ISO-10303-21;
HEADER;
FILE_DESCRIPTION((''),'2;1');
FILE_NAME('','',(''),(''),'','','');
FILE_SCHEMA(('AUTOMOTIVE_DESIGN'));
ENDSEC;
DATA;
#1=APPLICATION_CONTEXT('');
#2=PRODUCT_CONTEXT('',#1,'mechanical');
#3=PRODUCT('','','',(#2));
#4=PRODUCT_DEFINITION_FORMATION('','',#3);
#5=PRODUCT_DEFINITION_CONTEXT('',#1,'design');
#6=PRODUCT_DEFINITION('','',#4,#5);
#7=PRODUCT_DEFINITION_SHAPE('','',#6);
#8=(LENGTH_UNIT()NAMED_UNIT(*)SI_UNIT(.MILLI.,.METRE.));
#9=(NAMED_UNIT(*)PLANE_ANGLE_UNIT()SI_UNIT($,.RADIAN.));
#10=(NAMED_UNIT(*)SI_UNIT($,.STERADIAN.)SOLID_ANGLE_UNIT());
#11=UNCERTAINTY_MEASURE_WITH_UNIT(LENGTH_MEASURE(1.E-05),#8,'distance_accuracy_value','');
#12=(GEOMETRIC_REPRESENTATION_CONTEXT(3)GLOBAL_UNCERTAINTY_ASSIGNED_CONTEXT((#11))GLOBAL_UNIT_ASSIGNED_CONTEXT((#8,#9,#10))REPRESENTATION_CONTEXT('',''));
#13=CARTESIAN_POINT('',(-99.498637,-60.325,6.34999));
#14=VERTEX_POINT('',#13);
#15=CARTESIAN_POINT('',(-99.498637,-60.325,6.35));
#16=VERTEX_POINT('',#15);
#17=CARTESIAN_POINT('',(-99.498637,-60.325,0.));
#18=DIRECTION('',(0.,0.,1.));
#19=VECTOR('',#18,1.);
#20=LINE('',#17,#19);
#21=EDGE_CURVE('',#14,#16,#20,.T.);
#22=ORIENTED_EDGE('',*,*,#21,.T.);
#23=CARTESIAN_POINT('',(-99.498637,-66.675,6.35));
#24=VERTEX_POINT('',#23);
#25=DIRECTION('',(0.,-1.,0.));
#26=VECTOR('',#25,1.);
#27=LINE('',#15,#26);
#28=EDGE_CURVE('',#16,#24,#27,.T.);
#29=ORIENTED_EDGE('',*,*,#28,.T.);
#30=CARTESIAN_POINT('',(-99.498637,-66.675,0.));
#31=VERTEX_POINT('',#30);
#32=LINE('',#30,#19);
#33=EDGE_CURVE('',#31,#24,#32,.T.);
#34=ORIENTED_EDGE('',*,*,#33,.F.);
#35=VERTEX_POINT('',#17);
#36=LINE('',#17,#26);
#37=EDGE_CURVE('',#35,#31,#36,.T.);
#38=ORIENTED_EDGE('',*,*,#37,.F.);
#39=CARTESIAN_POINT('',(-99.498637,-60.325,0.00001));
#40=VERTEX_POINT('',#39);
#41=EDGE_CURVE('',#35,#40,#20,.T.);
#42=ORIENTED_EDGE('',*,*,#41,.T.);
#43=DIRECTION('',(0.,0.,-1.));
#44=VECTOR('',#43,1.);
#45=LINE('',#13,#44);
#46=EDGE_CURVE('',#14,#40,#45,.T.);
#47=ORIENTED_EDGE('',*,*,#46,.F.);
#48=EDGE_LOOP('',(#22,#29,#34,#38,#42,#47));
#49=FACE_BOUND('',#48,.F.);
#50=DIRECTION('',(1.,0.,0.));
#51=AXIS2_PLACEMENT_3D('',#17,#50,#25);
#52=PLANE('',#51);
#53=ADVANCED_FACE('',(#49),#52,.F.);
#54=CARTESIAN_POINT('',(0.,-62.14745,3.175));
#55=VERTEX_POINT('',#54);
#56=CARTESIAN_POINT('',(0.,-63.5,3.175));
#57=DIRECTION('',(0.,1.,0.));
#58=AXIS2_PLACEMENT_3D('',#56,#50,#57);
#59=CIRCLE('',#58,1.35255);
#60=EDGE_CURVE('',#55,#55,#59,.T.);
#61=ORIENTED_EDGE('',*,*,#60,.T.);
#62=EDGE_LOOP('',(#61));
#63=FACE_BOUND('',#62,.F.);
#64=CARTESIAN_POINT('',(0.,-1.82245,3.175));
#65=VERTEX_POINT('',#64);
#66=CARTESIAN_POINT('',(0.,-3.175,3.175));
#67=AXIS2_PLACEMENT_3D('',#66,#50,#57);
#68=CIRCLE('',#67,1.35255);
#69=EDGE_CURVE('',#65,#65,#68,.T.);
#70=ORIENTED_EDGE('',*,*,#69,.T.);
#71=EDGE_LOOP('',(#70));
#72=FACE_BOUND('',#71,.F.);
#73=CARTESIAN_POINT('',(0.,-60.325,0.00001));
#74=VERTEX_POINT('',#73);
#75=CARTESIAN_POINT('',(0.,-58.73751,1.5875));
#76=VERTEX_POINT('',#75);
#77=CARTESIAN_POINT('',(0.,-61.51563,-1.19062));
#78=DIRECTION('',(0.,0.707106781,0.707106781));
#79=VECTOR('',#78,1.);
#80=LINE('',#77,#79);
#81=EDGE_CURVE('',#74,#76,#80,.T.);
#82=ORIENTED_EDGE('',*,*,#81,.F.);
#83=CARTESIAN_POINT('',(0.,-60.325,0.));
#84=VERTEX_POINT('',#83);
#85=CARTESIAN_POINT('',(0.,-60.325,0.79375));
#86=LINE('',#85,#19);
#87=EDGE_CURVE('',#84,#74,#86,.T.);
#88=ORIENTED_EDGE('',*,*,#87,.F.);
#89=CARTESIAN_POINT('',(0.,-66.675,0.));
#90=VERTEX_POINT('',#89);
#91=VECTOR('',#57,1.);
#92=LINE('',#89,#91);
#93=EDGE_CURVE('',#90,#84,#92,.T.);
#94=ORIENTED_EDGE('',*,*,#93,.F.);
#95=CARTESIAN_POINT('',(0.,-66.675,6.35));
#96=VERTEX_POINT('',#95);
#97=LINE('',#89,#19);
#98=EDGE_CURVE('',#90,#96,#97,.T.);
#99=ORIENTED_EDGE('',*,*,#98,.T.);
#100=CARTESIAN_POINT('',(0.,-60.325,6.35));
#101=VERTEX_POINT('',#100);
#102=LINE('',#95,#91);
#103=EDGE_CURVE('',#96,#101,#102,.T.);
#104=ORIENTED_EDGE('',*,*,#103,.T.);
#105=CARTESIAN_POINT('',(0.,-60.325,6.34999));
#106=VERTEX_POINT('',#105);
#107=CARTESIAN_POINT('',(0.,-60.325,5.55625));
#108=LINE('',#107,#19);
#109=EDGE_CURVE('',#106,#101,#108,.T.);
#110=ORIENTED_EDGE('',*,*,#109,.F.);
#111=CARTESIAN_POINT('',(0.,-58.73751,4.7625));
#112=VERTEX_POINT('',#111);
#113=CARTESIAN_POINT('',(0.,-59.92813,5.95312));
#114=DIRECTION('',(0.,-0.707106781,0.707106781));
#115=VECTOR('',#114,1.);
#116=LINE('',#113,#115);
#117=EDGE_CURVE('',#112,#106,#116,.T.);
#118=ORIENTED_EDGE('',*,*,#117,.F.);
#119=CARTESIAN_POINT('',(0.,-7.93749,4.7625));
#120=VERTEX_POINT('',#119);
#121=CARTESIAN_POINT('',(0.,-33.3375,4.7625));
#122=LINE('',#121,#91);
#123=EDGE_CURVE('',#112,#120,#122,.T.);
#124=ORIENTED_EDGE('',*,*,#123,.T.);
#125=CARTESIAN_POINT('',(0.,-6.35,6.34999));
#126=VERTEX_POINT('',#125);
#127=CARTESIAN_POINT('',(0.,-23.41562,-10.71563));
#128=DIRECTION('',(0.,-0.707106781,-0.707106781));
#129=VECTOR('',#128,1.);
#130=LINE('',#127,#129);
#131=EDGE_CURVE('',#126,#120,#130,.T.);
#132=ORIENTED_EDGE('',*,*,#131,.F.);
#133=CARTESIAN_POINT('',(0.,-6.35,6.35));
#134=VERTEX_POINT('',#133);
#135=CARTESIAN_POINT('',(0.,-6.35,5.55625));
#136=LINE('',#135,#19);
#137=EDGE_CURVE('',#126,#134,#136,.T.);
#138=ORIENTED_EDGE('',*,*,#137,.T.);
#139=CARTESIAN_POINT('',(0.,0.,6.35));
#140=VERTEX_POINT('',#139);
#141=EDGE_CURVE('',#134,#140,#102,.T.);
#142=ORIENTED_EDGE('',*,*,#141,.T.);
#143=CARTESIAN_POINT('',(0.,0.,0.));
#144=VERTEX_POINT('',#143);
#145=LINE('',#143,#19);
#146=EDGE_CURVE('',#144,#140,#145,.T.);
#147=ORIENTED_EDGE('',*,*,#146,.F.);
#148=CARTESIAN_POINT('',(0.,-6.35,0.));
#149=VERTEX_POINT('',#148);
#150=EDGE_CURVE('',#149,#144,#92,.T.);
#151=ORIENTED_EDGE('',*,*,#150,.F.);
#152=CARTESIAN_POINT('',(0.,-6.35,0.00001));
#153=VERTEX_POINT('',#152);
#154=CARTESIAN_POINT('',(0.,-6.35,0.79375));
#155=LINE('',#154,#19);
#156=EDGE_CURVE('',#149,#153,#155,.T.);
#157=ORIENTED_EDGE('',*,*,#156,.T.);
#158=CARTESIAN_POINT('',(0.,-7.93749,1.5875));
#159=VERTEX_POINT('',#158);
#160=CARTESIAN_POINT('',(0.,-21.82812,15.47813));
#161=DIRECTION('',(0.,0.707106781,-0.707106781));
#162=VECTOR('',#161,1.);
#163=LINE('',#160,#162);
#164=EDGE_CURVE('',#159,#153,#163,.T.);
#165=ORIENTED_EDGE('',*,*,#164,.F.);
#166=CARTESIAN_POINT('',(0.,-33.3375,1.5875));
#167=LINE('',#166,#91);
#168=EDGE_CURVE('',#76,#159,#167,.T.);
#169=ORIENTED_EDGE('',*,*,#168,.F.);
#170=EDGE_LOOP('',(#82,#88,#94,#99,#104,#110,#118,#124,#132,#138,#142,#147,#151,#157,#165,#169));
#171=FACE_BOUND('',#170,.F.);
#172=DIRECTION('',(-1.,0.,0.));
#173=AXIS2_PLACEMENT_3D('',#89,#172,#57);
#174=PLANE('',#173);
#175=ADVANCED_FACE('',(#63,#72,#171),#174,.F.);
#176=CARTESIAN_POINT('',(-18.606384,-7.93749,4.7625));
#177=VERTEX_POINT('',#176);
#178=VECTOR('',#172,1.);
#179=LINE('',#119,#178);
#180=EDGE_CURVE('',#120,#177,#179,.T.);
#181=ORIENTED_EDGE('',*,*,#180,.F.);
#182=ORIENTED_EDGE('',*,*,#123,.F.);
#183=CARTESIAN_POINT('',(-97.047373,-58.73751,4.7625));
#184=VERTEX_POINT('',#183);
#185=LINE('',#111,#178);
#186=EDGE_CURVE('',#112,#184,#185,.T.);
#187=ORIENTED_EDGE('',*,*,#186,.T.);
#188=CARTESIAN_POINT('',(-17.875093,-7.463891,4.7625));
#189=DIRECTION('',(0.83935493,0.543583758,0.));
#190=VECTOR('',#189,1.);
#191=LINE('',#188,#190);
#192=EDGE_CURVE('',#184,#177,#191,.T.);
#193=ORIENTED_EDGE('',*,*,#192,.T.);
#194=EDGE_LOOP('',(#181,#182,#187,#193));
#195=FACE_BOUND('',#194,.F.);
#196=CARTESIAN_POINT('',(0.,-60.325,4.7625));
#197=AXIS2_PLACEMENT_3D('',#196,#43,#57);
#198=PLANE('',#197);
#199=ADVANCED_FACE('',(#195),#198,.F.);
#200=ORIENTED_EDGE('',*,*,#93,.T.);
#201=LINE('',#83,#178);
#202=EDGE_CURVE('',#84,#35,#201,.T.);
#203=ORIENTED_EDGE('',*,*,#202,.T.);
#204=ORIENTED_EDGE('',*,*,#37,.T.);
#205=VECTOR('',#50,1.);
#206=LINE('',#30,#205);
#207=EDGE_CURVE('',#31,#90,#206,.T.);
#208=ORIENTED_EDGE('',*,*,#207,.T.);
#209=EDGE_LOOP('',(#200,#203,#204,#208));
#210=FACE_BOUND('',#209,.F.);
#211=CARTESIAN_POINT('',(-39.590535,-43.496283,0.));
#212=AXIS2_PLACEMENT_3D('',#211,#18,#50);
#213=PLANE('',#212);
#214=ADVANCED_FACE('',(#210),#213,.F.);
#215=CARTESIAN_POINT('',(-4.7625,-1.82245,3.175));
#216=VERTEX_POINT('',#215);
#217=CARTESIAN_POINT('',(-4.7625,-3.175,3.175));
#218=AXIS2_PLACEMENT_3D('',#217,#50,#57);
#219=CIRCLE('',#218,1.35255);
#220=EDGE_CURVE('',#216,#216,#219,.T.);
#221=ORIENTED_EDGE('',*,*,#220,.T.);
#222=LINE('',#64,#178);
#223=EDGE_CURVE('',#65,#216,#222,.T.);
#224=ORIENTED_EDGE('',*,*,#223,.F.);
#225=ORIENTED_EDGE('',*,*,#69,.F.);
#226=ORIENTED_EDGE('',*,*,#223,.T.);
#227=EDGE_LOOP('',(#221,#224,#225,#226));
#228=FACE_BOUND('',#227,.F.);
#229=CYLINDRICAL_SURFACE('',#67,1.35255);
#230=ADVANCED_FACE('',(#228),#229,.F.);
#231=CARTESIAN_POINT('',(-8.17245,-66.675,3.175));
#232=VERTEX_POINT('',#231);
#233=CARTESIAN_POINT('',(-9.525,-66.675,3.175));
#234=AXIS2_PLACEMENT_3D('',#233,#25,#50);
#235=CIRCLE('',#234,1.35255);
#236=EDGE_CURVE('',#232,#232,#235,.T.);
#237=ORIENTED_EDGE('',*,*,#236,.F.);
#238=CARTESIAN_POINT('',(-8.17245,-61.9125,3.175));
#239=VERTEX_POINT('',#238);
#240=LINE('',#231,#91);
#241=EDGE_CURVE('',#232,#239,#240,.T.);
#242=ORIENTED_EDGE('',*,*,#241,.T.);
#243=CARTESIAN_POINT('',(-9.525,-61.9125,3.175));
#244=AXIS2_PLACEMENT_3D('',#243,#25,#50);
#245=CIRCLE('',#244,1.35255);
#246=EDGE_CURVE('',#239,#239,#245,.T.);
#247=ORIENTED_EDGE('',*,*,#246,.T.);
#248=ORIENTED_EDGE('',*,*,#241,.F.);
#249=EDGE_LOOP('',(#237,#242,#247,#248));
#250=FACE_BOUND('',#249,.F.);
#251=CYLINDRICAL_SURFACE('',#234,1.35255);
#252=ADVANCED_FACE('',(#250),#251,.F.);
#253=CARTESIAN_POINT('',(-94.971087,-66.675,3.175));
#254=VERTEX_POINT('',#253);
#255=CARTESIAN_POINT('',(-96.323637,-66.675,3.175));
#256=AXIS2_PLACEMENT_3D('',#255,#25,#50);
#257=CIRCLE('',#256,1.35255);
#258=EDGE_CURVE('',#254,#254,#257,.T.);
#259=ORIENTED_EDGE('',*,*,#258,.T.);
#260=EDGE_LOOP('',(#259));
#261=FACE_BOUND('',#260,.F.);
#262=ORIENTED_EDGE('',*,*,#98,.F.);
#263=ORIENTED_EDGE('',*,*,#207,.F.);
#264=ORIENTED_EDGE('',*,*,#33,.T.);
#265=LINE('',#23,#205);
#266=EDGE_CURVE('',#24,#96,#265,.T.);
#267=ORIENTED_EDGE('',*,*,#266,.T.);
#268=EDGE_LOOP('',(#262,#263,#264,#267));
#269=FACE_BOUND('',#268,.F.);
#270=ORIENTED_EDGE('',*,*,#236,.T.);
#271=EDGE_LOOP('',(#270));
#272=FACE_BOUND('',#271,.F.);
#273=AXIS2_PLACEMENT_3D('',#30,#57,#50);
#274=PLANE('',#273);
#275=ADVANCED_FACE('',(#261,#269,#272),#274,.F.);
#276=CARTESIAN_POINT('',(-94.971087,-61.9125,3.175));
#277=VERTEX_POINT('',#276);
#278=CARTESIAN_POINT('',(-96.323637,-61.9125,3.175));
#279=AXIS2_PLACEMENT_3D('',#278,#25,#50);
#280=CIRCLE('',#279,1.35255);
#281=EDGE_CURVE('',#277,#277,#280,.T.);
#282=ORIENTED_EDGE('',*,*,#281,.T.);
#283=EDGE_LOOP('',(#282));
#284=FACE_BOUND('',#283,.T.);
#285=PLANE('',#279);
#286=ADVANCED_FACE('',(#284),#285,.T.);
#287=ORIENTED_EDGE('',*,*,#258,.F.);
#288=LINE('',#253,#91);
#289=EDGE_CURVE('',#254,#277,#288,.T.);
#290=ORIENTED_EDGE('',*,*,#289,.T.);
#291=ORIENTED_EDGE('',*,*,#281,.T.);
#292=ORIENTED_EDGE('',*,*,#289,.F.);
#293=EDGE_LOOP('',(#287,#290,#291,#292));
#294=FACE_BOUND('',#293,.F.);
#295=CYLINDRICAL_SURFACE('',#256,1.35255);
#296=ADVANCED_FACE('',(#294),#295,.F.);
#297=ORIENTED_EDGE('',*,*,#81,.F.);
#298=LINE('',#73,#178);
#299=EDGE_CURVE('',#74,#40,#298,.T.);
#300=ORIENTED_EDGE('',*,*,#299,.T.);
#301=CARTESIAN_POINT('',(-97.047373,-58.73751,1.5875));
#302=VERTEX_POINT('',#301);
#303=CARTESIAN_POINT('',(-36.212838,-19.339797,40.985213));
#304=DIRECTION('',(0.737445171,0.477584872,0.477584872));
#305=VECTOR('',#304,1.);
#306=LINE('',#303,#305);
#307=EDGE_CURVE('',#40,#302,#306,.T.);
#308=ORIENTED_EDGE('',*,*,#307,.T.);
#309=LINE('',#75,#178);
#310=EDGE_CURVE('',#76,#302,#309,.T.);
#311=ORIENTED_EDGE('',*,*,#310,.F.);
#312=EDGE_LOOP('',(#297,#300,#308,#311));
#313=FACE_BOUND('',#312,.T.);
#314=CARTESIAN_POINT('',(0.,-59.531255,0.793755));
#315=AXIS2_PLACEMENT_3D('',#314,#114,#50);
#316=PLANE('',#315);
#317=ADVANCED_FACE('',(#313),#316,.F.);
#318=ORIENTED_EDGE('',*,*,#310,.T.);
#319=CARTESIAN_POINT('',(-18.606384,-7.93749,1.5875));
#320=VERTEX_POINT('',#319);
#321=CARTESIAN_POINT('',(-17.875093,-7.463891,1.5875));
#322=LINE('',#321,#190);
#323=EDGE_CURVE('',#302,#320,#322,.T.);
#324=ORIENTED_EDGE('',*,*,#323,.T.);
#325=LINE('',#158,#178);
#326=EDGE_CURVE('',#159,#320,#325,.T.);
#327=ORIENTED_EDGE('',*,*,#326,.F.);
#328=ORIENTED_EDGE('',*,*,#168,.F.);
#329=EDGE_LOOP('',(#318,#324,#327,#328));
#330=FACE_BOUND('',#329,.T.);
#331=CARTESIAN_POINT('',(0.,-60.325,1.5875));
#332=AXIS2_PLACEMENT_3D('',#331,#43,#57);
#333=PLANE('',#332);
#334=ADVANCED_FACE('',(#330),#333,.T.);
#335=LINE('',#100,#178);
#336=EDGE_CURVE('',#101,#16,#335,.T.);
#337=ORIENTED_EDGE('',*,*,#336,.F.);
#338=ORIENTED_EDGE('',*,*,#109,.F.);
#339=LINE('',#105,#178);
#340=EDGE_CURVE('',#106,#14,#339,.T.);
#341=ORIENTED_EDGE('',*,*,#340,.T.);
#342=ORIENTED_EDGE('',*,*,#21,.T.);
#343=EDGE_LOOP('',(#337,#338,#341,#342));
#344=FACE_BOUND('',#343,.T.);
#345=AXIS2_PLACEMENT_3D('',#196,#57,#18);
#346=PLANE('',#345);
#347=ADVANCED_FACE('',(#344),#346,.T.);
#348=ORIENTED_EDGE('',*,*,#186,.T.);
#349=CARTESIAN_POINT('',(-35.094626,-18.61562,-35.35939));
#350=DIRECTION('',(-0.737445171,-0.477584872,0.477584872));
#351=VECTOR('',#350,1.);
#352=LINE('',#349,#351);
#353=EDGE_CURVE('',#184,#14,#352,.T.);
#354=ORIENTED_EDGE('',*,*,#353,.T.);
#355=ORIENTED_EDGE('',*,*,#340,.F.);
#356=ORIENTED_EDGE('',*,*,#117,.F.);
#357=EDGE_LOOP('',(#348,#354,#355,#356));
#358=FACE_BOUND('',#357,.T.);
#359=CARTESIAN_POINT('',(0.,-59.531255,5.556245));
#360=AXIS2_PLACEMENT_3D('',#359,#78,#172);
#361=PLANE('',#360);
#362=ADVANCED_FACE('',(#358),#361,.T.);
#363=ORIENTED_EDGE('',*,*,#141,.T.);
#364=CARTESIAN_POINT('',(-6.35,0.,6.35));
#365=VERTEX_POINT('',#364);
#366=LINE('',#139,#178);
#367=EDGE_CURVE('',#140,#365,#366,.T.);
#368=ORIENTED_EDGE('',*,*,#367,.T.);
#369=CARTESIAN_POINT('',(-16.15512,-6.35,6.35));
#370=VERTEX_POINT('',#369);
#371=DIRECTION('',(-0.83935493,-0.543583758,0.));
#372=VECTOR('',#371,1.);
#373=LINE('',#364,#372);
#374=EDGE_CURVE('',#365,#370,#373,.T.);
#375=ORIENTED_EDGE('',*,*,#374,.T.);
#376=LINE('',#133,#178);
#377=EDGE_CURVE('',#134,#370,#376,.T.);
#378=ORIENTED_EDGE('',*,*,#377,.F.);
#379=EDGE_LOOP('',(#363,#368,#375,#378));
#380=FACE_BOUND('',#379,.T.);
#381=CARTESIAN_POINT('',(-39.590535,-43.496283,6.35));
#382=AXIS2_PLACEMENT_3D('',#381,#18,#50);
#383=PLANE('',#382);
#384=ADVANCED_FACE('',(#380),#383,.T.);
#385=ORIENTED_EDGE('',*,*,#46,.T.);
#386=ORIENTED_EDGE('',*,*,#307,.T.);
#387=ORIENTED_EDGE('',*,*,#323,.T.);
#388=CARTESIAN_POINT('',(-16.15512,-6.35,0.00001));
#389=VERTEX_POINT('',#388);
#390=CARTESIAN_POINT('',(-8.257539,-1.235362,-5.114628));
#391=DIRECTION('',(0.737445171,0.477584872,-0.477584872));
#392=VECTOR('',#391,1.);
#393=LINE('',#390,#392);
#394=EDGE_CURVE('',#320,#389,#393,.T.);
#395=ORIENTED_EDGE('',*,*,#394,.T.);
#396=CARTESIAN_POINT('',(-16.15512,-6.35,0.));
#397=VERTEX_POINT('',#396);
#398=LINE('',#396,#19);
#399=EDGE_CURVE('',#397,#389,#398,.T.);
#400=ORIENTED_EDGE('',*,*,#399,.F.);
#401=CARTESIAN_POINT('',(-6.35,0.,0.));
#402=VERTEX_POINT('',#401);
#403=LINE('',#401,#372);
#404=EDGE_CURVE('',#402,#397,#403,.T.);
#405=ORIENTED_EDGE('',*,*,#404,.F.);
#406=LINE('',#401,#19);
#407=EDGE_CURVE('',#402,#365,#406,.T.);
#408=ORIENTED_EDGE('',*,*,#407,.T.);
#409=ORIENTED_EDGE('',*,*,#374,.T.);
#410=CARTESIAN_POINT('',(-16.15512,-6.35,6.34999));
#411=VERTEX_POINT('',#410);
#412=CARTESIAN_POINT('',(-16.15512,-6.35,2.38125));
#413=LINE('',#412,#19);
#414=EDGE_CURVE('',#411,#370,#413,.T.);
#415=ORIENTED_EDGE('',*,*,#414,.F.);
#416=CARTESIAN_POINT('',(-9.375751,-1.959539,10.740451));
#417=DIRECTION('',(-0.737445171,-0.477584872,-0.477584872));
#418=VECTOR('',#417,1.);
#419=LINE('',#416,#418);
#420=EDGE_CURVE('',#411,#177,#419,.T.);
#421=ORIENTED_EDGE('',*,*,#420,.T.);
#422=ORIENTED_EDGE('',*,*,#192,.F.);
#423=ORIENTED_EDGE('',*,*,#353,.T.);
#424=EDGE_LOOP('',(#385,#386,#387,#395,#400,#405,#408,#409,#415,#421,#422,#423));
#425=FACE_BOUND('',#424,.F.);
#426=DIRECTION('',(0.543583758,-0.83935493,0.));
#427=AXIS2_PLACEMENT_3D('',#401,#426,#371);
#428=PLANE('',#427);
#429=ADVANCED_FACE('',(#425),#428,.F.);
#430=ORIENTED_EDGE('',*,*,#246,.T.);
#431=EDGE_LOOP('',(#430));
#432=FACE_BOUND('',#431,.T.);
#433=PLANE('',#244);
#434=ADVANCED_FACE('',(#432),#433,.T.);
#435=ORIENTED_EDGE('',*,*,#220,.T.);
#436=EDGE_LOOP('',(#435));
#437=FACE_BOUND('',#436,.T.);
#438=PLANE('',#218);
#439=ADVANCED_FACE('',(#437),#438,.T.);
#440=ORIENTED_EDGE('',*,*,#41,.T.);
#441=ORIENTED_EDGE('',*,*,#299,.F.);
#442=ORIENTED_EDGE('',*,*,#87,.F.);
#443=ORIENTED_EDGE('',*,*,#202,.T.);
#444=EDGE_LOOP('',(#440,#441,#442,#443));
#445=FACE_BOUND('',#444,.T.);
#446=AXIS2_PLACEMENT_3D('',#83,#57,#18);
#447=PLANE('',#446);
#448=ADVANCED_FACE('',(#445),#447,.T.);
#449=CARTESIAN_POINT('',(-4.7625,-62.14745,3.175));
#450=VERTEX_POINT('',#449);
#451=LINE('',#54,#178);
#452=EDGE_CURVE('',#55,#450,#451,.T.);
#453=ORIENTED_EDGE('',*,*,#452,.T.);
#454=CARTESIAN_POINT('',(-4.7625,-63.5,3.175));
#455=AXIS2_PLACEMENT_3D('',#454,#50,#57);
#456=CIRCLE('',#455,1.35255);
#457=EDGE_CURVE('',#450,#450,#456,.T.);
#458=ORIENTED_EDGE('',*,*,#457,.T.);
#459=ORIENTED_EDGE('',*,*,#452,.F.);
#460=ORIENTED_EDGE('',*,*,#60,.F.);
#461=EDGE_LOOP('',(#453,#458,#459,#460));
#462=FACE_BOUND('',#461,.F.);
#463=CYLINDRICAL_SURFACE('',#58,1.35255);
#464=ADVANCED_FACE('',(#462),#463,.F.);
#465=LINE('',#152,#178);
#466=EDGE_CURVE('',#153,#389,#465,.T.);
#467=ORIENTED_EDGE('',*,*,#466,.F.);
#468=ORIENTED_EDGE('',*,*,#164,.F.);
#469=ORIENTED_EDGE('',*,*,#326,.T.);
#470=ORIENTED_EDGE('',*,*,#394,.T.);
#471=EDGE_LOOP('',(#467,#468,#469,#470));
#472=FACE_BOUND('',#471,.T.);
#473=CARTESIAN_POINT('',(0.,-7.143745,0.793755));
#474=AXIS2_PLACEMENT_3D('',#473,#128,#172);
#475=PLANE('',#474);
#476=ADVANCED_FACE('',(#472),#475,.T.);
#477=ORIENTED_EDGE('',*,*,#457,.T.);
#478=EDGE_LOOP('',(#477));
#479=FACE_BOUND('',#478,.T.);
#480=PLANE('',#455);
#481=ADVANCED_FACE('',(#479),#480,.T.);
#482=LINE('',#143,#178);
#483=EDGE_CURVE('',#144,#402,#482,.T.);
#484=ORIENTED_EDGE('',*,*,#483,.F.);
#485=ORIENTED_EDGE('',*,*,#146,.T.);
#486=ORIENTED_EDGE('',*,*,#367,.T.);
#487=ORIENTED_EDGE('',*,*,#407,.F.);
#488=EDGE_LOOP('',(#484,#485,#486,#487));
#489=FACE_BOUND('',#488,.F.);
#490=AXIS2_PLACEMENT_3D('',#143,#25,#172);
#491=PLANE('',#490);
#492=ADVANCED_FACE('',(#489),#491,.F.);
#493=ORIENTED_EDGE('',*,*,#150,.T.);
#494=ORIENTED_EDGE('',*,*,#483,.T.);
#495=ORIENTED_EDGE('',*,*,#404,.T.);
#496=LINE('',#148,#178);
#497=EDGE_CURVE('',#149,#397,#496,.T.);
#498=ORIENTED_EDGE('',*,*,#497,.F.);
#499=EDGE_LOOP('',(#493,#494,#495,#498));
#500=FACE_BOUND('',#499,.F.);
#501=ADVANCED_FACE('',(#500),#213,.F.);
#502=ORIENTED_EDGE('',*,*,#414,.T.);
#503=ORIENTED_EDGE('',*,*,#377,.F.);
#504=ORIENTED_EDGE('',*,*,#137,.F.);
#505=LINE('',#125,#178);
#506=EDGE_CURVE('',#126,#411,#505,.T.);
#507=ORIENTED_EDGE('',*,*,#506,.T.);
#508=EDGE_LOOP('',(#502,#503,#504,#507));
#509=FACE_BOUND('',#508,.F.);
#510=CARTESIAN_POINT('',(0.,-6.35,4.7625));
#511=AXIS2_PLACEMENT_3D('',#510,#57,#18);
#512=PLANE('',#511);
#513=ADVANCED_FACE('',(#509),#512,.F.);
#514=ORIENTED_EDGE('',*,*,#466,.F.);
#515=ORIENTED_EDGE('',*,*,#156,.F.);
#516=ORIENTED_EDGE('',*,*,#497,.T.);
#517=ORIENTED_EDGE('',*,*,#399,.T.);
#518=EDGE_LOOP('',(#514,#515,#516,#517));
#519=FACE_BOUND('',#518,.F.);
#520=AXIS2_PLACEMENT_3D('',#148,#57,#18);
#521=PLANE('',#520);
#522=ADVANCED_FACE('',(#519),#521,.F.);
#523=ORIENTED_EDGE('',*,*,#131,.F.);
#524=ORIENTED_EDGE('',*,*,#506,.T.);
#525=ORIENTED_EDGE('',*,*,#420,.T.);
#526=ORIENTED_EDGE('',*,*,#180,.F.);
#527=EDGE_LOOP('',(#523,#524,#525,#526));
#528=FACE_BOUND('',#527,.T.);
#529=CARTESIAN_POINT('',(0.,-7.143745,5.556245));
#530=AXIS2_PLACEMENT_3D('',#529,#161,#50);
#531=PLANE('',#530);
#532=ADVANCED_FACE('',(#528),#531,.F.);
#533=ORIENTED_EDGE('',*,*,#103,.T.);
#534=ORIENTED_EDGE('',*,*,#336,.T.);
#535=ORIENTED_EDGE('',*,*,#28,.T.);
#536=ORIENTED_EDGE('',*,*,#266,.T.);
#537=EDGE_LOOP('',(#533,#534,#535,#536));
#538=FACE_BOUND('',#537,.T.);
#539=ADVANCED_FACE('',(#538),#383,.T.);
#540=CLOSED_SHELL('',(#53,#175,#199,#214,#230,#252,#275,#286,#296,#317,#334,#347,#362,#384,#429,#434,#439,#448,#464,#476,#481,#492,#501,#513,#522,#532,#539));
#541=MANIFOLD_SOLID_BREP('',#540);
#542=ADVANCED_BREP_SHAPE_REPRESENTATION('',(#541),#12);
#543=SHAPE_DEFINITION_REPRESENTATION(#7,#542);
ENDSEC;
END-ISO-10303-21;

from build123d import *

# Parameters (mm, degrees)
F1_DEPTH = 6.35
F2_R     = 1.35255
F3_DEPTH = 4.7625
F4_R     = 1.35255
F5_DEPTH = 4.7625
F6_W     = 53.975
F6_H     = 1.5875
F7_DEPTH = 99.4996370206
F8_SIZE  = 1.58749


# Not quite as in the source:
# - a fillet or chamfer is up to 0.001 mm smaller than in the source, because OpenCascade refuses the exact size


with BuildPart() as f1:
    # F0 (on Top) → F1 (new body)
    with BuildSketch(Plane.XY):
        Polygon((0, -66.675), (0, 0), (-6.35, 0), (-99.4986370206, -60.325), (-99.4986370206, -66.675), align=None)
    extrude(amount=F1_DEPTH)

    # F2 (on face) → F3 (cut)
    with BuildSketch(Plane.YZ):
        with Locations((-63.5, 3.175)):
            Circle(F2_R)
        with Locations((-3.175, 3.175)):
            Circle(F2_R)
    extrude(amount=-F3_DEPTH, mode=Mode.SUBTRACT)

    # F4 (on face) → F5 (cut)
    with BuildSketch(Plane.XZ.offset(66.675)):
        with Locations((-96.3236370206, 3.175)):
            Circle(F4_R)
        with Locations((-9.525, 3.175)):
            Circle(F4_R)
    extrude(amount=-F5_DEPTH, mode=Mode.SUBTRACT)

    # F6 (on face) → F7 (cut, through all)
    with BuildSketch(Plane.YZ):
        with Locations((-33.3375, 5.55625)):
            Rectangle(F6_W, F6_H)
        with Locations((-33.3375, 0.79375)):
            Rectangle(F6_W, F6_H)
    extrude(amount=-F7_DEPTH, mode=Mode.SUBTRACT)

    # F8 (size 1.5875 in the source; OpenCascade refuses exactly that, so slightly less here)
    f8_edges = [f1.edges().sort_by_distance(p)[0] for p in [
        (-49.749319, -60.325, 4.7625),
        (-49.749319, -60.325, 1.5875),
        (-8.07756, -6.35, 4.7625),
        (-8.07756, -6.35, 1.5875),
    ]]
    chamfer(f8_edges, length=F8_SIZE)


solid = f1.part
